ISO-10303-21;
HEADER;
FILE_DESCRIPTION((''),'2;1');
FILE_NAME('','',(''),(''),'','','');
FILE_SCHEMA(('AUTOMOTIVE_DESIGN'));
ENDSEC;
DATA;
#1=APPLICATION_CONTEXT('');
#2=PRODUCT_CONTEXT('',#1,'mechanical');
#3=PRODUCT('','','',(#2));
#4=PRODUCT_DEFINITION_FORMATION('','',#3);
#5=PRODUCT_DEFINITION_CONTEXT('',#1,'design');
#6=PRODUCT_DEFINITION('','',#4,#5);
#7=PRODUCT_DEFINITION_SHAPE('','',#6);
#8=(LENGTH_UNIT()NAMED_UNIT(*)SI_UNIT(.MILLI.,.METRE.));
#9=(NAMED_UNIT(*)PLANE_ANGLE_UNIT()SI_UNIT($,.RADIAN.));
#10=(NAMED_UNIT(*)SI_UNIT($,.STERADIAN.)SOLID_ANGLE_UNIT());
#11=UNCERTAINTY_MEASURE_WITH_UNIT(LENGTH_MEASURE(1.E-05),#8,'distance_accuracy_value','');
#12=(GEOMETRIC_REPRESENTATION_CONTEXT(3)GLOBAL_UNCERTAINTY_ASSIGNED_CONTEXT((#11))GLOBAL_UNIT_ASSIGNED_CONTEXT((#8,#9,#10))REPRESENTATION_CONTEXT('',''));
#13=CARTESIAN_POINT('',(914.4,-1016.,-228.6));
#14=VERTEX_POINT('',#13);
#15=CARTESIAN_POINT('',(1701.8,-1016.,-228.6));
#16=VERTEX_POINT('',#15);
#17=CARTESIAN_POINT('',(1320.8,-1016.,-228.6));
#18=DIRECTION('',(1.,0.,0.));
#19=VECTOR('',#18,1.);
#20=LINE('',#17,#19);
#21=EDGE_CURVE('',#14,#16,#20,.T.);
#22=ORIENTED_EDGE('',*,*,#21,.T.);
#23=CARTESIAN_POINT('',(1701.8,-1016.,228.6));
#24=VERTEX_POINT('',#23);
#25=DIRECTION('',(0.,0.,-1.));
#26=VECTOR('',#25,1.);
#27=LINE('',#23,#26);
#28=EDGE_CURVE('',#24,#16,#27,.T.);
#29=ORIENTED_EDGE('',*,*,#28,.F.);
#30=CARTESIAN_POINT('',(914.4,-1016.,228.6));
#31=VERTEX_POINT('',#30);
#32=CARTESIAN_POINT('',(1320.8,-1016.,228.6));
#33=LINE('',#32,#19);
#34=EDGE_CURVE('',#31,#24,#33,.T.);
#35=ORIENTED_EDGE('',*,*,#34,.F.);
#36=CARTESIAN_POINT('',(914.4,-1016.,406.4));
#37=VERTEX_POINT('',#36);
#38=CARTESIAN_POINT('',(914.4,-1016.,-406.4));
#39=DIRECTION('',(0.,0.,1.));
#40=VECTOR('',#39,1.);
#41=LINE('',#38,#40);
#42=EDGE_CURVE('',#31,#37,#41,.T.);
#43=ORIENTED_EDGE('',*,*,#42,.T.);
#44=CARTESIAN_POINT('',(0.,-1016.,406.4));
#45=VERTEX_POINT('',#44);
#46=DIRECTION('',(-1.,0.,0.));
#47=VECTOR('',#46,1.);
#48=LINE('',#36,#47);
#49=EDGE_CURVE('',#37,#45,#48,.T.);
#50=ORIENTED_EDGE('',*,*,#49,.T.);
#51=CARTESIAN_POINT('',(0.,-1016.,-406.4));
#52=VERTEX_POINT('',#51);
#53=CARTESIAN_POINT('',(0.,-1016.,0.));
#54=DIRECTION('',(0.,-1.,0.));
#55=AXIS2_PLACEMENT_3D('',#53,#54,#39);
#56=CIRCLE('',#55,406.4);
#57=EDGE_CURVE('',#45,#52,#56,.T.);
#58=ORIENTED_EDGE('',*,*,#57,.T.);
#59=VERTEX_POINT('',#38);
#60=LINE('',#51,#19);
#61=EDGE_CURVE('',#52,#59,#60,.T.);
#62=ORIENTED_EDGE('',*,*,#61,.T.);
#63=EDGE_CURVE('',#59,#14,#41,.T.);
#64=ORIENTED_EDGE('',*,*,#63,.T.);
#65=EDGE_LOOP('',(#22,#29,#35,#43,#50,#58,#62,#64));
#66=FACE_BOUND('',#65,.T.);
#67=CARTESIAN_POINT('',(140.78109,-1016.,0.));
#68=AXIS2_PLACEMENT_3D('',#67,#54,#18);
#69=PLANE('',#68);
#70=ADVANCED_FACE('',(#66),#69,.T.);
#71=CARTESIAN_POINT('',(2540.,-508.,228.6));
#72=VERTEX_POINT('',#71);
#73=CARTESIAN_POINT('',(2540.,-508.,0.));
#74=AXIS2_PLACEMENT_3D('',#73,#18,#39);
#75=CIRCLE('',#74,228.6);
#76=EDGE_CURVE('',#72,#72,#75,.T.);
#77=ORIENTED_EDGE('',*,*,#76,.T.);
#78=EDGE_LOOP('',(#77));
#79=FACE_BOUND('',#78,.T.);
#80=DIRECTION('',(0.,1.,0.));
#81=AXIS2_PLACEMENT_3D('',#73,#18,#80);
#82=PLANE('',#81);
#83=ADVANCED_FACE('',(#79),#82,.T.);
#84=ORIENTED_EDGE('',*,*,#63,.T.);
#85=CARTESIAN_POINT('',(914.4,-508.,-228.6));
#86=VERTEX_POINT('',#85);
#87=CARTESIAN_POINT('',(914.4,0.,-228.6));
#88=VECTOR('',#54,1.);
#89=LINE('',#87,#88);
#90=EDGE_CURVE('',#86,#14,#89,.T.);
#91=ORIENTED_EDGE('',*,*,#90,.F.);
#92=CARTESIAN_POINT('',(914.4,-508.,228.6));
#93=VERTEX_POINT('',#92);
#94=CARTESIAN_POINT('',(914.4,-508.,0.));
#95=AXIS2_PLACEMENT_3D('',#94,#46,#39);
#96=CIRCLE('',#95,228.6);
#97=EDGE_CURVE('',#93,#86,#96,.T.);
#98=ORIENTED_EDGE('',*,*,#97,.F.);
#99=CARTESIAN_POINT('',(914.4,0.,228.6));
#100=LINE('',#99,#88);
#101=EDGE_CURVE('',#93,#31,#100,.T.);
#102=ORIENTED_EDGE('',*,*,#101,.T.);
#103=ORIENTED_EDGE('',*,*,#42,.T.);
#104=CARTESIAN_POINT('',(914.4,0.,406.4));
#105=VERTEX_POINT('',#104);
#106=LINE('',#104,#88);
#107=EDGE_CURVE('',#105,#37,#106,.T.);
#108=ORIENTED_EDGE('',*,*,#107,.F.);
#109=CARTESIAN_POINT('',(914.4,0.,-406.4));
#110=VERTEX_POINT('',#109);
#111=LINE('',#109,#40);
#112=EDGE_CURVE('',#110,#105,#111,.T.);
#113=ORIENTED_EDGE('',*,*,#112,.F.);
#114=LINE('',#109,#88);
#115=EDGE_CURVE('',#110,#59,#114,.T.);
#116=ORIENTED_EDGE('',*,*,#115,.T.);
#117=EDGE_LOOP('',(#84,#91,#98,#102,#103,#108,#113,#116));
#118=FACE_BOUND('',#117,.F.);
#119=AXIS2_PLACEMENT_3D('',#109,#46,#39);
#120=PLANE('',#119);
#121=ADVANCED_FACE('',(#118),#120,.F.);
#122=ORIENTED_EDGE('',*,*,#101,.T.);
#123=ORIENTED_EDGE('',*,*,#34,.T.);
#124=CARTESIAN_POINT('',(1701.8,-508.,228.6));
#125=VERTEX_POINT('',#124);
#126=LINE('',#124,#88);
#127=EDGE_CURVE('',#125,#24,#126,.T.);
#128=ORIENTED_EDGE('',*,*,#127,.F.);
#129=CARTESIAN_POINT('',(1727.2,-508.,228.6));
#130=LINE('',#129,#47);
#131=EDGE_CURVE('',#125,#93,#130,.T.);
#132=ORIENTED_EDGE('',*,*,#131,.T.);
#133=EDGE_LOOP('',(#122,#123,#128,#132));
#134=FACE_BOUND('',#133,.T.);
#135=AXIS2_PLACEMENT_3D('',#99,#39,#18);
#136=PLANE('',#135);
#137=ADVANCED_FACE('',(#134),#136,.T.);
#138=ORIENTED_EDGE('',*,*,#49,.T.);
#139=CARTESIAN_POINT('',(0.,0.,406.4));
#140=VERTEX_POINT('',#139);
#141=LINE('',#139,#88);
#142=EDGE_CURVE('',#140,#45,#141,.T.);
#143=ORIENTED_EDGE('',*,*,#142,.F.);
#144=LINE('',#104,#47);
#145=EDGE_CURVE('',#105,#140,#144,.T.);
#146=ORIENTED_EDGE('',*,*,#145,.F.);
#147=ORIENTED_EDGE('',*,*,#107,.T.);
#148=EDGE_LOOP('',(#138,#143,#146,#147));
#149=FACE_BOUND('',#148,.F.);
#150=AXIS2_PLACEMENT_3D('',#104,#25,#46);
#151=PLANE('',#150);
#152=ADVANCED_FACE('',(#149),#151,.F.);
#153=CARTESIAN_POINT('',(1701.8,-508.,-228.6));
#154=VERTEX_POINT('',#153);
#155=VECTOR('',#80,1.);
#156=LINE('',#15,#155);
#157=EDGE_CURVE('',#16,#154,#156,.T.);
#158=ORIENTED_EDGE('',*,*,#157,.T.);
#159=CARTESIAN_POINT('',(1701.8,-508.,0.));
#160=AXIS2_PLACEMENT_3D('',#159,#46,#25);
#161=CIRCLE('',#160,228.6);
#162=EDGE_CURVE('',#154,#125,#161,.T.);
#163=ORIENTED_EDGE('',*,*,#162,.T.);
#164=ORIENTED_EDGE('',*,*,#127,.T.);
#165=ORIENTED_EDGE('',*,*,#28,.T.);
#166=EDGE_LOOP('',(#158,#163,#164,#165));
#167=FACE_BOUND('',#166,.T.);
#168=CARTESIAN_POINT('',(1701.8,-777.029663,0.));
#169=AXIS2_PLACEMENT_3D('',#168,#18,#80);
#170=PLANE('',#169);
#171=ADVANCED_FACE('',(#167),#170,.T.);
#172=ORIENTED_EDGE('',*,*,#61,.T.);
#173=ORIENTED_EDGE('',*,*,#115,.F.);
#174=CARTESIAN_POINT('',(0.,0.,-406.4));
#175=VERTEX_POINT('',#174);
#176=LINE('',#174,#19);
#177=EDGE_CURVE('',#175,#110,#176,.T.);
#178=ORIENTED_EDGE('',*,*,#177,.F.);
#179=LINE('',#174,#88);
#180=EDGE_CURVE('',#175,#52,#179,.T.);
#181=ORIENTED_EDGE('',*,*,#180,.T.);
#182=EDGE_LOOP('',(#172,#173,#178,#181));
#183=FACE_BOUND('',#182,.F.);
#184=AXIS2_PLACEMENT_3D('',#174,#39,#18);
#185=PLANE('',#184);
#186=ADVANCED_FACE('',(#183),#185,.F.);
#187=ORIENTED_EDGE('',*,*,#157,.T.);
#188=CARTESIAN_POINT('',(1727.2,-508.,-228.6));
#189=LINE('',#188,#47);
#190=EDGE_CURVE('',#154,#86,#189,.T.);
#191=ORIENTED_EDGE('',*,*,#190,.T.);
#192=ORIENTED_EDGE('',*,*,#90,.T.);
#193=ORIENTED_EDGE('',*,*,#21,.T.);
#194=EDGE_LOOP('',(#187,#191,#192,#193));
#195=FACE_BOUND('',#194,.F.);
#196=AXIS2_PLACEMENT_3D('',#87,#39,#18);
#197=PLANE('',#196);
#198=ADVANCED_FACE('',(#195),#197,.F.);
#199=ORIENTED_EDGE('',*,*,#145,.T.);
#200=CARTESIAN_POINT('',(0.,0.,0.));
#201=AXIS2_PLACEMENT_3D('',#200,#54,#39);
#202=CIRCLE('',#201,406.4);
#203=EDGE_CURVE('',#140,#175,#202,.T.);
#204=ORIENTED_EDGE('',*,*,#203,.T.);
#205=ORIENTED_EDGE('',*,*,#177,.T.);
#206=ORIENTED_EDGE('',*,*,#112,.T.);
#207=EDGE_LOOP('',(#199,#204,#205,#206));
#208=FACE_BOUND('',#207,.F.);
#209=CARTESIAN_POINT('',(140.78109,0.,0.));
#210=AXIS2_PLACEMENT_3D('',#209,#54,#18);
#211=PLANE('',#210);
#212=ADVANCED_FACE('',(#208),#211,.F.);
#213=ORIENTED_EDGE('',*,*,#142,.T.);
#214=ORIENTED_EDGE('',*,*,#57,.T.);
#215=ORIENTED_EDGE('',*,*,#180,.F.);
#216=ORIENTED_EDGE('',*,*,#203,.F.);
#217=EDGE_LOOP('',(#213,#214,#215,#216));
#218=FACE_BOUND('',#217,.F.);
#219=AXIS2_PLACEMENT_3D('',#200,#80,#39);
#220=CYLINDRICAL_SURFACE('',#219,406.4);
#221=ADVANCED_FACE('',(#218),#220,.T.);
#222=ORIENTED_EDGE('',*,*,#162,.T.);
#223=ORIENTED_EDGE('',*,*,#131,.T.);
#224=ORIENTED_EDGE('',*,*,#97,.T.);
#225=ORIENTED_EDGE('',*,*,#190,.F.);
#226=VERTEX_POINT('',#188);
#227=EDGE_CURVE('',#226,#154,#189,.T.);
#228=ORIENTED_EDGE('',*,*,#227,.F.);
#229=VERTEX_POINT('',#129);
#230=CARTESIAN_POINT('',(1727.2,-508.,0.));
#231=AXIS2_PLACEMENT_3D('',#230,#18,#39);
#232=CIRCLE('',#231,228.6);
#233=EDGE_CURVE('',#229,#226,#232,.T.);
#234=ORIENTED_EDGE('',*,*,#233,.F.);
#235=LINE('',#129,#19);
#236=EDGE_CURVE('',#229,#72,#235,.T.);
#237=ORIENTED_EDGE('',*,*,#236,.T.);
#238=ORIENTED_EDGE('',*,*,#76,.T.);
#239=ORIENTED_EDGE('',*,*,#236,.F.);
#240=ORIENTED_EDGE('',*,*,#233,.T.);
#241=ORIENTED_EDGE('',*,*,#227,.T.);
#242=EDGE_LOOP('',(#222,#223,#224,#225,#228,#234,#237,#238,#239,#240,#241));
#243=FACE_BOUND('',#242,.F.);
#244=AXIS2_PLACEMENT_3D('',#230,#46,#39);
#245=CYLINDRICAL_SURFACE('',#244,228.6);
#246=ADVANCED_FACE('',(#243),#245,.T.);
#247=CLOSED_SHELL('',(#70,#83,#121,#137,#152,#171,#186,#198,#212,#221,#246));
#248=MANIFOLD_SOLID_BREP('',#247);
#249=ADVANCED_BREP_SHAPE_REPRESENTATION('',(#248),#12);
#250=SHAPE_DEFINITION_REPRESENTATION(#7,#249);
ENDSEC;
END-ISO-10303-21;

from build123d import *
from build123d import SkipClean  # not in build123d's __all__

# Parameters (mm, degrees)
F0_W     = 812.8
F0_H     = 457.2
F1_DEPTH = 1016
F3_DEPTH = 812.8
F4_DEPTH = 812.8
F5_DEPTH = 25.4


# Not quite as in the source:
# - a feature names something its author has since deleted; it is built from what else it names


with BuildPart() as f1:
    # F0 (on Front) → F1 (new body)
    with BuildSketch(Plane.XZ):
        with BuildLine():
            ThreePointArc((0, -406.4), (287.3681958742, -287.3681958742), (406.4, 0))
            ThreePointArc((406.4, 0), (287.3681958742, 287.3681958742), (0, 406.4))
            Line((0, 406.4), (0, -406.4))
        make_face()
        with BuildLine():
            ThreePointArc((0, 406.4), (287.3681958742, 287.3681958742), (406.4, 0))
            ThreePointArc((406.4, 0), (287.3681958742, -287.3681958742), (0, -406.4))
            Line((0, -406.4), (914.4, -406.4))
            Line((914.4, -406.4), (914.4, -228.6))
            Line((914.4, -228.6), (914.4, 228.6))
            Line((914.4, 228.6), (914.4, 406.4))
            Line((914.4, 406.4), (0, 406.4))
        make_face()
        with BuildLine():
            Line((0, -406.4), (0, 406.4))
            ThreePointArc((0, 406.4), (-406.4, 0), (0, -406.4))
        make_face()
        with Locations((1320.8, 0)):
            Rectangle(F0_W, F0_H)
    extrude(amount=F1_DEPTH)

    # F2 (on face) → F3 (cut)
    with BuildSketch(Plane.YZ.offset(1727.2)):
        with BuildLine():
            ThreePointArc((-508, 228.6), (-346.3553898207, 161.6446101792), (-279.4, 0))
            ThreePointArc((-279.4, 0), (-346.3553898207, -161.6446101792), (-508, -228.6))
            Line((-508, -228.6), (0, -228.6))
            Line((0, -228.6), (0, 228.6))
            Line((0, 228.6), (-508, 228.6))
        make_face()
    extrude(amount=-F3_DEPTH, mode=Mode.SUBTRACT)

    # F2 (on face) → F4 (join)
    with BuildSketch(Plane.YZ.offset(1727.2)):
        with BuildLine():
            ThreePointArc((-508, -228.6), (-346.3553898207, -161.6446101792), (-279.4, 0))
            ThreePointArc((-279.4, 0), (-346.3553898207, 161.6446101792), (-508, 228.6))
            ThreePointArc((-508, 228.6), (-736.6, 0), (-508, -228.6))
        make_face()
    with SkipClean():  # cleaning this boolean's faces spoils the solid; the shape is the same uncleaned
        extrude(amount=F4_DEPTH)

    # F2 (on face) → F5 (cut)
    with BuildSketch(Plane.YZ.offset(1727.2)):
        with BuildLine():
            ThreePointArc((-508, -228.6), (-736.6, 0), (-508, 228.6))
            Line((-508, 228.6), (-1016, 228.6))
            Line((-1016, 228.6), (-1016, -228.6))
            Line((-1016, -228.6), (-508, -228.6))
        make_face()
    extrude(amount=-F5_DEPTH, mode=Mode.SUBTRACT)


solid = f1.part
